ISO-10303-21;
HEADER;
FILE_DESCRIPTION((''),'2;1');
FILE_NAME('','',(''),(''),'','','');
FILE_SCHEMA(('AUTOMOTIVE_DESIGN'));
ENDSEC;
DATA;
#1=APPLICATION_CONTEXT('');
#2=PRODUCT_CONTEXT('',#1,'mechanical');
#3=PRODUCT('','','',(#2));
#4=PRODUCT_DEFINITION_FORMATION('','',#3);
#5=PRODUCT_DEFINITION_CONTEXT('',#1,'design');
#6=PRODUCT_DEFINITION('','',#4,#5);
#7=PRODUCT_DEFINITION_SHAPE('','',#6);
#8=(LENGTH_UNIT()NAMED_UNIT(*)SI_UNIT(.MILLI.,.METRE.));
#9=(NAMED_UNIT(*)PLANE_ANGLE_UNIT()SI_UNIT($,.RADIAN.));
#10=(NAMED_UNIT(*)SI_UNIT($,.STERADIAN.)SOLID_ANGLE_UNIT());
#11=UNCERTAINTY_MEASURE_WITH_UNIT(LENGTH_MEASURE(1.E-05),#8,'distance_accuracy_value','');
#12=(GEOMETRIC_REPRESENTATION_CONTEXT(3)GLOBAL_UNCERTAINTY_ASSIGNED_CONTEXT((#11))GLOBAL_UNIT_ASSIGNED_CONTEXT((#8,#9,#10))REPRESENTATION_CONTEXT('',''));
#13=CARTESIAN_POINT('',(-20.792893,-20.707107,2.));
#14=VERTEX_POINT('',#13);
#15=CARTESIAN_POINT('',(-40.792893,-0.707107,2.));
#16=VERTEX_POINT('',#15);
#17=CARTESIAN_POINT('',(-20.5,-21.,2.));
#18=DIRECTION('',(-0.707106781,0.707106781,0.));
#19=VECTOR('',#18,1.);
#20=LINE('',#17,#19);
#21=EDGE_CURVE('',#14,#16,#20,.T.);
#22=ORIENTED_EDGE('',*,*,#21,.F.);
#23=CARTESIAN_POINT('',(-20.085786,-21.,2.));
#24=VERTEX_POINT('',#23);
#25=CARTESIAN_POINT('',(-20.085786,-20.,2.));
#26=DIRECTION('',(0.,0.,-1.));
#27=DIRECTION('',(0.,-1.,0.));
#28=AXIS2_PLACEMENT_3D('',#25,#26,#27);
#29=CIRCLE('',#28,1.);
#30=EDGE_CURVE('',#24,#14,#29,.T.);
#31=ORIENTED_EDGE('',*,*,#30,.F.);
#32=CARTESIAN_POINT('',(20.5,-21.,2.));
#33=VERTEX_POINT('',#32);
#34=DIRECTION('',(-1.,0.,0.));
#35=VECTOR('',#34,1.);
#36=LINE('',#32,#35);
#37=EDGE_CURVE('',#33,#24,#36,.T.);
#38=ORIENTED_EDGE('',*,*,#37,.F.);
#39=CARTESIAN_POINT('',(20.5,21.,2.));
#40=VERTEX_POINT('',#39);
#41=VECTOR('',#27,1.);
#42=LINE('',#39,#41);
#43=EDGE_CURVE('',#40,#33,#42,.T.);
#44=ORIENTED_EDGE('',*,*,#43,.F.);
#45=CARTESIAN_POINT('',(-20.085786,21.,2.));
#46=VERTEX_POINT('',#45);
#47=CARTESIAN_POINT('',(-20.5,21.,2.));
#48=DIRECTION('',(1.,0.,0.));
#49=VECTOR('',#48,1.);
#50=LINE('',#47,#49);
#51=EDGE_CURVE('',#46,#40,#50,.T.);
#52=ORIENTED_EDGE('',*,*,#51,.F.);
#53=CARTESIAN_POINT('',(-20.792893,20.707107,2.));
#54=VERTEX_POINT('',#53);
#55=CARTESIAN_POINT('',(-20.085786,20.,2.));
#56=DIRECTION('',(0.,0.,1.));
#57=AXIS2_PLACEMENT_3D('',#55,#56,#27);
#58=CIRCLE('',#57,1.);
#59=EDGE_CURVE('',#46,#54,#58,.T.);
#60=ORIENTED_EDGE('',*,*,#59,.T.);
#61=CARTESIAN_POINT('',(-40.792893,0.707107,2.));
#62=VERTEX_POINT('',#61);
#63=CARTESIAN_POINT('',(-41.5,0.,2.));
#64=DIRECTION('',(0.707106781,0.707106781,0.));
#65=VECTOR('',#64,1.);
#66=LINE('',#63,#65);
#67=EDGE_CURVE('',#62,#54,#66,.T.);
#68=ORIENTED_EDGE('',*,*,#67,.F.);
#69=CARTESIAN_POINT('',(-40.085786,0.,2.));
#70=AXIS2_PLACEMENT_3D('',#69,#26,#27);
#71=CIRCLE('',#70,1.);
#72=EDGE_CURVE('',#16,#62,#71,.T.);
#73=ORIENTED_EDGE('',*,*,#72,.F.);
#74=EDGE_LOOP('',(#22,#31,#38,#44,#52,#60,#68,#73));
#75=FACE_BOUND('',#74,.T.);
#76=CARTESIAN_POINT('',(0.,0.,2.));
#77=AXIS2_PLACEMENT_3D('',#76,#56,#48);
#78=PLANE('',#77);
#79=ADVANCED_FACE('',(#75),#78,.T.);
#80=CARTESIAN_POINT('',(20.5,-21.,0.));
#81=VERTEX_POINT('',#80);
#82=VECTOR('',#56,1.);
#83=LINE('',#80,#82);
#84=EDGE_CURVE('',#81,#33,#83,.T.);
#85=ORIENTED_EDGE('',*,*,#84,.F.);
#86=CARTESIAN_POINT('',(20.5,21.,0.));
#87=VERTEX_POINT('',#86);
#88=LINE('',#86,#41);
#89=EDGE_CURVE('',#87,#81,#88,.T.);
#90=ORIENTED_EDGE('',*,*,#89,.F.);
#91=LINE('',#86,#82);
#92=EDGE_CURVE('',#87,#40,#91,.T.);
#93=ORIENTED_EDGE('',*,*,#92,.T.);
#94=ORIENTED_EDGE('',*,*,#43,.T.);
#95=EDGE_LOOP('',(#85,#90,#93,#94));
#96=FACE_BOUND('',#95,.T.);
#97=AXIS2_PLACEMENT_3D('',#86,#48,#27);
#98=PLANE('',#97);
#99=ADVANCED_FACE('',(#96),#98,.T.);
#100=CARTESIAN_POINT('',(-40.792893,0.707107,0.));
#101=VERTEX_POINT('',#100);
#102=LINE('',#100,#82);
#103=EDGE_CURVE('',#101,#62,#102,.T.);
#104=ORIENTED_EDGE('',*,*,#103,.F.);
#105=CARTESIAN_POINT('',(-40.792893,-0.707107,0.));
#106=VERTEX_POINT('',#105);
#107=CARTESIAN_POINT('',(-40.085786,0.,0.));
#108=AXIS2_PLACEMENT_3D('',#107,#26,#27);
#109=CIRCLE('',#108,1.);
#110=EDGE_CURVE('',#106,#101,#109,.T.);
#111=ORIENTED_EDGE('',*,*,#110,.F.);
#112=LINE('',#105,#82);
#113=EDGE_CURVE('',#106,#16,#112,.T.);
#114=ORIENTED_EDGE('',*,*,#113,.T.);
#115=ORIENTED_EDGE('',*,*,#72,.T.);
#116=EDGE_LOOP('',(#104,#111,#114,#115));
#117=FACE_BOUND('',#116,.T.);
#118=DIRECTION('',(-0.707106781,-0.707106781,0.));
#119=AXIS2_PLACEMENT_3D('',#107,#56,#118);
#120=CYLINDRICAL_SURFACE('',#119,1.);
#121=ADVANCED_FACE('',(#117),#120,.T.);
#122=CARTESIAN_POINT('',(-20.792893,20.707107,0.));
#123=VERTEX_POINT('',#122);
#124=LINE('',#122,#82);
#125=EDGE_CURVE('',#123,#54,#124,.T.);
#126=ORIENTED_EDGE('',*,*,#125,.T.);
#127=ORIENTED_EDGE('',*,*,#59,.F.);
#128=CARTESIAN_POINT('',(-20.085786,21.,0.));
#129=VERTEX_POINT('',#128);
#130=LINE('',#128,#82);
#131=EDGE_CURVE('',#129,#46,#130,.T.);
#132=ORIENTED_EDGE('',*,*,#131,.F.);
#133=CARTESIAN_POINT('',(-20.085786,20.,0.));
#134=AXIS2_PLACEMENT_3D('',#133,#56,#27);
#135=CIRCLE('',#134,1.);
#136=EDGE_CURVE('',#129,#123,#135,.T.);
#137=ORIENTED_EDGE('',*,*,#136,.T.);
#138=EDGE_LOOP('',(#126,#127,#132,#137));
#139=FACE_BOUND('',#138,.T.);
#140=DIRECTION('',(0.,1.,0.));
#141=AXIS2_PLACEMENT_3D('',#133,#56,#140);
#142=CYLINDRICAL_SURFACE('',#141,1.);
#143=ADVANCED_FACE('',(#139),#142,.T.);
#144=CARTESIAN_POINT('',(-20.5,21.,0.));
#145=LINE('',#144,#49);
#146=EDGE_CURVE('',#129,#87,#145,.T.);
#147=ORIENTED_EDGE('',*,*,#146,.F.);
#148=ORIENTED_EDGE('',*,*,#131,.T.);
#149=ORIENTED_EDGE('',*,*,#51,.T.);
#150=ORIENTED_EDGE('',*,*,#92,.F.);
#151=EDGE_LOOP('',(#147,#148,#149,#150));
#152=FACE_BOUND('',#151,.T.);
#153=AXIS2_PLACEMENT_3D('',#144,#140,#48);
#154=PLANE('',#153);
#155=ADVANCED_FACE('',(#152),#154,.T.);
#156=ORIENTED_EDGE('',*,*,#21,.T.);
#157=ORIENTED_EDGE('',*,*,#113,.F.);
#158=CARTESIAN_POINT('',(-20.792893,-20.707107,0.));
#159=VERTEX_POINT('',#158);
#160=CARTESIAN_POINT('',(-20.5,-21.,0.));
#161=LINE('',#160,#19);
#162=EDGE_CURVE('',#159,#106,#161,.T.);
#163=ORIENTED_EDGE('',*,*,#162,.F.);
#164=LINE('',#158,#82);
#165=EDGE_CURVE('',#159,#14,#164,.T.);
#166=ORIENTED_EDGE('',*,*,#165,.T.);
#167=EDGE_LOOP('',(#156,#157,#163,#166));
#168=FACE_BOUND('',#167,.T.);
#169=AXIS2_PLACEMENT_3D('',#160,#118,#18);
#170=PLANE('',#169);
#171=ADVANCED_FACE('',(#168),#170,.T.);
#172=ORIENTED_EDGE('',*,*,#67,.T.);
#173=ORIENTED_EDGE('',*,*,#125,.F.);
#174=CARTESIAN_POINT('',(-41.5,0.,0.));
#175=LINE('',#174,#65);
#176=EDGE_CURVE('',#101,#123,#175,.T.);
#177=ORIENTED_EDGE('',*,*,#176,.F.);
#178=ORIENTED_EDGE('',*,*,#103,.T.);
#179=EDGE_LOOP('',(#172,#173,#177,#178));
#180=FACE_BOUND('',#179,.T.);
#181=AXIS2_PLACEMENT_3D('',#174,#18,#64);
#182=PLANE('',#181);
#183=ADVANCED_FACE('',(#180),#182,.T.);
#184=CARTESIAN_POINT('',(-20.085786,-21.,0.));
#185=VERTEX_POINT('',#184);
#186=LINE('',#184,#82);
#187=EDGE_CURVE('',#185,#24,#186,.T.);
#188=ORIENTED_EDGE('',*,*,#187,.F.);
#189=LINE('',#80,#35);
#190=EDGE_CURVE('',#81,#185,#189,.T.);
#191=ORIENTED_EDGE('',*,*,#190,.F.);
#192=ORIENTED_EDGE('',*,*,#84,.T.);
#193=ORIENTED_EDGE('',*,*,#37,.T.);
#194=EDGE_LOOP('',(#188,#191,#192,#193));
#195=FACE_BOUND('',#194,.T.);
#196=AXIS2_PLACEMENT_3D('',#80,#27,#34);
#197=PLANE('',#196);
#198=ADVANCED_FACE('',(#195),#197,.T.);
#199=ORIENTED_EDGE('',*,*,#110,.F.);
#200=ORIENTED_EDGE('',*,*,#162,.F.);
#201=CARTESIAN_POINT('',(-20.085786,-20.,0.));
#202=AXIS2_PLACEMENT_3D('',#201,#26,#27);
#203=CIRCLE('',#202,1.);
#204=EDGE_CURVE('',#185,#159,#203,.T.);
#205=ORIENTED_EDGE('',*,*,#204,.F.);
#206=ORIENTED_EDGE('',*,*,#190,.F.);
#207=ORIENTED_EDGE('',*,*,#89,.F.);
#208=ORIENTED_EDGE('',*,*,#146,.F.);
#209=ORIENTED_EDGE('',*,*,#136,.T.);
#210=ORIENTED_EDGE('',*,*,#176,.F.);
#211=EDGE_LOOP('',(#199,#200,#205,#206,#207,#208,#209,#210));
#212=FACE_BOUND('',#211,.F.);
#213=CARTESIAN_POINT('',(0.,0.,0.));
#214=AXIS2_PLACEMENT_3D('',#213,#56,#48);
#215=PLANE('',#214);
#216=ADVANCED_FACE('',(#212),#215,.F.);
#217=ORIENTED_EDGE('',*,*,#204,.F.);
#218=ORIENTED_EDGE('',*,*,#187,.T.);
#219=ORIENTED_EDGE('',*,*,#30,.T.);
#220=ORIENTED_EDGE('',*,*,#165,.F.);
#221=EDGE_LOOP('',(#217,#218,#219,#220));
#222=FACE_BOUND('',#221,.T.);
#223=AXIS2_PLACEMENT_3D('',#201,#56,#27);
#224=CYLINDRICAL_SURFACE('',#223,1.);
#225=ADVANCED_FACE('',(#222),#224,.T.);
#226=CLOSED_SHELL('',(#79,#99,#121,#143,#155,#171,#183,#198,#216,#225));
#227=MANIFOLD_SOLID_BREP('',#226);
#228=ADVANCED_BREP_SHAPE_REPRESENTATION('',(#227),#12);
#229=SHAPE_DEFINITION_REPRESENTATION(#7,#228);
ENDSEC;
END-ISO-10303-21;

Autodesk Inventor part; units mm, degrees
ref_plane "YZ Plane" through (0, 0, 0) normal (1, 0, 0) x (0, 1, 0)
ref_plane "XZ Plane" through (0, 0, 0) normal (0, 1, 0) x (-1, 0, 0)
ref_plane "XY Plane" through (0, 0, 0) normal (0, 0, 1) x (1, 0, 0)
sketch "Sketch1" plane through (0, 0, 0) normal (0, 0, 1) x (1, 0, 0)
  line L0 (-20.5, 21) -> (20.5, 21)
  line L1 (20.5, 21) -> (20.5, -21)
  line L2 (20.5, -21) -> (-20.5, -21)
  line L3 (-20.5, -21) -> (-20.5, 21) construction
  line L4 (-20.5, 21) -> (20.5, -21) construction
  line L5 (-20.5, -21) -> (-41.5, 0)
  line L6 (-41.5, 0) -> (-20.5, 21)
  point P0 (0, 0)
  point P1 (0, 0)
  point P2 (20.5, 0)
  dimension "d0" = 41
  dimension "d1" = 42
  dimension "d4" = 62
extrude "Plate1" add sketch "Sketch1" along normal blind 2
fillet "Corner Round2" radius 1 3 edges at (-20.5, -21, 1) (-41.5, 0, 1) (-20.5, 21, 1)
equation "\"d2\" = Thickness"
equation "\"BendReliefWidth\" = Thickness"
equation "\"BendReliefDepth\" = 0.5 * Thickness"
equation "\"CornerReliefSize\" = 4 * Thickness"
equation "\"MinimumRemnant\" = 2 * Thickness"
equation "\"TransitionRadius\" = BendRadius"
equation "\"JacobiRadiusSize\" = BendRadius"
equation "\"GapSize\" = Thickness"
equation "\"Thickness\" = 2"
equation "\"BendRadius\" = 2.75"
properties part number "MNT-CDF-604 CAP" material "Stainless Steel"
